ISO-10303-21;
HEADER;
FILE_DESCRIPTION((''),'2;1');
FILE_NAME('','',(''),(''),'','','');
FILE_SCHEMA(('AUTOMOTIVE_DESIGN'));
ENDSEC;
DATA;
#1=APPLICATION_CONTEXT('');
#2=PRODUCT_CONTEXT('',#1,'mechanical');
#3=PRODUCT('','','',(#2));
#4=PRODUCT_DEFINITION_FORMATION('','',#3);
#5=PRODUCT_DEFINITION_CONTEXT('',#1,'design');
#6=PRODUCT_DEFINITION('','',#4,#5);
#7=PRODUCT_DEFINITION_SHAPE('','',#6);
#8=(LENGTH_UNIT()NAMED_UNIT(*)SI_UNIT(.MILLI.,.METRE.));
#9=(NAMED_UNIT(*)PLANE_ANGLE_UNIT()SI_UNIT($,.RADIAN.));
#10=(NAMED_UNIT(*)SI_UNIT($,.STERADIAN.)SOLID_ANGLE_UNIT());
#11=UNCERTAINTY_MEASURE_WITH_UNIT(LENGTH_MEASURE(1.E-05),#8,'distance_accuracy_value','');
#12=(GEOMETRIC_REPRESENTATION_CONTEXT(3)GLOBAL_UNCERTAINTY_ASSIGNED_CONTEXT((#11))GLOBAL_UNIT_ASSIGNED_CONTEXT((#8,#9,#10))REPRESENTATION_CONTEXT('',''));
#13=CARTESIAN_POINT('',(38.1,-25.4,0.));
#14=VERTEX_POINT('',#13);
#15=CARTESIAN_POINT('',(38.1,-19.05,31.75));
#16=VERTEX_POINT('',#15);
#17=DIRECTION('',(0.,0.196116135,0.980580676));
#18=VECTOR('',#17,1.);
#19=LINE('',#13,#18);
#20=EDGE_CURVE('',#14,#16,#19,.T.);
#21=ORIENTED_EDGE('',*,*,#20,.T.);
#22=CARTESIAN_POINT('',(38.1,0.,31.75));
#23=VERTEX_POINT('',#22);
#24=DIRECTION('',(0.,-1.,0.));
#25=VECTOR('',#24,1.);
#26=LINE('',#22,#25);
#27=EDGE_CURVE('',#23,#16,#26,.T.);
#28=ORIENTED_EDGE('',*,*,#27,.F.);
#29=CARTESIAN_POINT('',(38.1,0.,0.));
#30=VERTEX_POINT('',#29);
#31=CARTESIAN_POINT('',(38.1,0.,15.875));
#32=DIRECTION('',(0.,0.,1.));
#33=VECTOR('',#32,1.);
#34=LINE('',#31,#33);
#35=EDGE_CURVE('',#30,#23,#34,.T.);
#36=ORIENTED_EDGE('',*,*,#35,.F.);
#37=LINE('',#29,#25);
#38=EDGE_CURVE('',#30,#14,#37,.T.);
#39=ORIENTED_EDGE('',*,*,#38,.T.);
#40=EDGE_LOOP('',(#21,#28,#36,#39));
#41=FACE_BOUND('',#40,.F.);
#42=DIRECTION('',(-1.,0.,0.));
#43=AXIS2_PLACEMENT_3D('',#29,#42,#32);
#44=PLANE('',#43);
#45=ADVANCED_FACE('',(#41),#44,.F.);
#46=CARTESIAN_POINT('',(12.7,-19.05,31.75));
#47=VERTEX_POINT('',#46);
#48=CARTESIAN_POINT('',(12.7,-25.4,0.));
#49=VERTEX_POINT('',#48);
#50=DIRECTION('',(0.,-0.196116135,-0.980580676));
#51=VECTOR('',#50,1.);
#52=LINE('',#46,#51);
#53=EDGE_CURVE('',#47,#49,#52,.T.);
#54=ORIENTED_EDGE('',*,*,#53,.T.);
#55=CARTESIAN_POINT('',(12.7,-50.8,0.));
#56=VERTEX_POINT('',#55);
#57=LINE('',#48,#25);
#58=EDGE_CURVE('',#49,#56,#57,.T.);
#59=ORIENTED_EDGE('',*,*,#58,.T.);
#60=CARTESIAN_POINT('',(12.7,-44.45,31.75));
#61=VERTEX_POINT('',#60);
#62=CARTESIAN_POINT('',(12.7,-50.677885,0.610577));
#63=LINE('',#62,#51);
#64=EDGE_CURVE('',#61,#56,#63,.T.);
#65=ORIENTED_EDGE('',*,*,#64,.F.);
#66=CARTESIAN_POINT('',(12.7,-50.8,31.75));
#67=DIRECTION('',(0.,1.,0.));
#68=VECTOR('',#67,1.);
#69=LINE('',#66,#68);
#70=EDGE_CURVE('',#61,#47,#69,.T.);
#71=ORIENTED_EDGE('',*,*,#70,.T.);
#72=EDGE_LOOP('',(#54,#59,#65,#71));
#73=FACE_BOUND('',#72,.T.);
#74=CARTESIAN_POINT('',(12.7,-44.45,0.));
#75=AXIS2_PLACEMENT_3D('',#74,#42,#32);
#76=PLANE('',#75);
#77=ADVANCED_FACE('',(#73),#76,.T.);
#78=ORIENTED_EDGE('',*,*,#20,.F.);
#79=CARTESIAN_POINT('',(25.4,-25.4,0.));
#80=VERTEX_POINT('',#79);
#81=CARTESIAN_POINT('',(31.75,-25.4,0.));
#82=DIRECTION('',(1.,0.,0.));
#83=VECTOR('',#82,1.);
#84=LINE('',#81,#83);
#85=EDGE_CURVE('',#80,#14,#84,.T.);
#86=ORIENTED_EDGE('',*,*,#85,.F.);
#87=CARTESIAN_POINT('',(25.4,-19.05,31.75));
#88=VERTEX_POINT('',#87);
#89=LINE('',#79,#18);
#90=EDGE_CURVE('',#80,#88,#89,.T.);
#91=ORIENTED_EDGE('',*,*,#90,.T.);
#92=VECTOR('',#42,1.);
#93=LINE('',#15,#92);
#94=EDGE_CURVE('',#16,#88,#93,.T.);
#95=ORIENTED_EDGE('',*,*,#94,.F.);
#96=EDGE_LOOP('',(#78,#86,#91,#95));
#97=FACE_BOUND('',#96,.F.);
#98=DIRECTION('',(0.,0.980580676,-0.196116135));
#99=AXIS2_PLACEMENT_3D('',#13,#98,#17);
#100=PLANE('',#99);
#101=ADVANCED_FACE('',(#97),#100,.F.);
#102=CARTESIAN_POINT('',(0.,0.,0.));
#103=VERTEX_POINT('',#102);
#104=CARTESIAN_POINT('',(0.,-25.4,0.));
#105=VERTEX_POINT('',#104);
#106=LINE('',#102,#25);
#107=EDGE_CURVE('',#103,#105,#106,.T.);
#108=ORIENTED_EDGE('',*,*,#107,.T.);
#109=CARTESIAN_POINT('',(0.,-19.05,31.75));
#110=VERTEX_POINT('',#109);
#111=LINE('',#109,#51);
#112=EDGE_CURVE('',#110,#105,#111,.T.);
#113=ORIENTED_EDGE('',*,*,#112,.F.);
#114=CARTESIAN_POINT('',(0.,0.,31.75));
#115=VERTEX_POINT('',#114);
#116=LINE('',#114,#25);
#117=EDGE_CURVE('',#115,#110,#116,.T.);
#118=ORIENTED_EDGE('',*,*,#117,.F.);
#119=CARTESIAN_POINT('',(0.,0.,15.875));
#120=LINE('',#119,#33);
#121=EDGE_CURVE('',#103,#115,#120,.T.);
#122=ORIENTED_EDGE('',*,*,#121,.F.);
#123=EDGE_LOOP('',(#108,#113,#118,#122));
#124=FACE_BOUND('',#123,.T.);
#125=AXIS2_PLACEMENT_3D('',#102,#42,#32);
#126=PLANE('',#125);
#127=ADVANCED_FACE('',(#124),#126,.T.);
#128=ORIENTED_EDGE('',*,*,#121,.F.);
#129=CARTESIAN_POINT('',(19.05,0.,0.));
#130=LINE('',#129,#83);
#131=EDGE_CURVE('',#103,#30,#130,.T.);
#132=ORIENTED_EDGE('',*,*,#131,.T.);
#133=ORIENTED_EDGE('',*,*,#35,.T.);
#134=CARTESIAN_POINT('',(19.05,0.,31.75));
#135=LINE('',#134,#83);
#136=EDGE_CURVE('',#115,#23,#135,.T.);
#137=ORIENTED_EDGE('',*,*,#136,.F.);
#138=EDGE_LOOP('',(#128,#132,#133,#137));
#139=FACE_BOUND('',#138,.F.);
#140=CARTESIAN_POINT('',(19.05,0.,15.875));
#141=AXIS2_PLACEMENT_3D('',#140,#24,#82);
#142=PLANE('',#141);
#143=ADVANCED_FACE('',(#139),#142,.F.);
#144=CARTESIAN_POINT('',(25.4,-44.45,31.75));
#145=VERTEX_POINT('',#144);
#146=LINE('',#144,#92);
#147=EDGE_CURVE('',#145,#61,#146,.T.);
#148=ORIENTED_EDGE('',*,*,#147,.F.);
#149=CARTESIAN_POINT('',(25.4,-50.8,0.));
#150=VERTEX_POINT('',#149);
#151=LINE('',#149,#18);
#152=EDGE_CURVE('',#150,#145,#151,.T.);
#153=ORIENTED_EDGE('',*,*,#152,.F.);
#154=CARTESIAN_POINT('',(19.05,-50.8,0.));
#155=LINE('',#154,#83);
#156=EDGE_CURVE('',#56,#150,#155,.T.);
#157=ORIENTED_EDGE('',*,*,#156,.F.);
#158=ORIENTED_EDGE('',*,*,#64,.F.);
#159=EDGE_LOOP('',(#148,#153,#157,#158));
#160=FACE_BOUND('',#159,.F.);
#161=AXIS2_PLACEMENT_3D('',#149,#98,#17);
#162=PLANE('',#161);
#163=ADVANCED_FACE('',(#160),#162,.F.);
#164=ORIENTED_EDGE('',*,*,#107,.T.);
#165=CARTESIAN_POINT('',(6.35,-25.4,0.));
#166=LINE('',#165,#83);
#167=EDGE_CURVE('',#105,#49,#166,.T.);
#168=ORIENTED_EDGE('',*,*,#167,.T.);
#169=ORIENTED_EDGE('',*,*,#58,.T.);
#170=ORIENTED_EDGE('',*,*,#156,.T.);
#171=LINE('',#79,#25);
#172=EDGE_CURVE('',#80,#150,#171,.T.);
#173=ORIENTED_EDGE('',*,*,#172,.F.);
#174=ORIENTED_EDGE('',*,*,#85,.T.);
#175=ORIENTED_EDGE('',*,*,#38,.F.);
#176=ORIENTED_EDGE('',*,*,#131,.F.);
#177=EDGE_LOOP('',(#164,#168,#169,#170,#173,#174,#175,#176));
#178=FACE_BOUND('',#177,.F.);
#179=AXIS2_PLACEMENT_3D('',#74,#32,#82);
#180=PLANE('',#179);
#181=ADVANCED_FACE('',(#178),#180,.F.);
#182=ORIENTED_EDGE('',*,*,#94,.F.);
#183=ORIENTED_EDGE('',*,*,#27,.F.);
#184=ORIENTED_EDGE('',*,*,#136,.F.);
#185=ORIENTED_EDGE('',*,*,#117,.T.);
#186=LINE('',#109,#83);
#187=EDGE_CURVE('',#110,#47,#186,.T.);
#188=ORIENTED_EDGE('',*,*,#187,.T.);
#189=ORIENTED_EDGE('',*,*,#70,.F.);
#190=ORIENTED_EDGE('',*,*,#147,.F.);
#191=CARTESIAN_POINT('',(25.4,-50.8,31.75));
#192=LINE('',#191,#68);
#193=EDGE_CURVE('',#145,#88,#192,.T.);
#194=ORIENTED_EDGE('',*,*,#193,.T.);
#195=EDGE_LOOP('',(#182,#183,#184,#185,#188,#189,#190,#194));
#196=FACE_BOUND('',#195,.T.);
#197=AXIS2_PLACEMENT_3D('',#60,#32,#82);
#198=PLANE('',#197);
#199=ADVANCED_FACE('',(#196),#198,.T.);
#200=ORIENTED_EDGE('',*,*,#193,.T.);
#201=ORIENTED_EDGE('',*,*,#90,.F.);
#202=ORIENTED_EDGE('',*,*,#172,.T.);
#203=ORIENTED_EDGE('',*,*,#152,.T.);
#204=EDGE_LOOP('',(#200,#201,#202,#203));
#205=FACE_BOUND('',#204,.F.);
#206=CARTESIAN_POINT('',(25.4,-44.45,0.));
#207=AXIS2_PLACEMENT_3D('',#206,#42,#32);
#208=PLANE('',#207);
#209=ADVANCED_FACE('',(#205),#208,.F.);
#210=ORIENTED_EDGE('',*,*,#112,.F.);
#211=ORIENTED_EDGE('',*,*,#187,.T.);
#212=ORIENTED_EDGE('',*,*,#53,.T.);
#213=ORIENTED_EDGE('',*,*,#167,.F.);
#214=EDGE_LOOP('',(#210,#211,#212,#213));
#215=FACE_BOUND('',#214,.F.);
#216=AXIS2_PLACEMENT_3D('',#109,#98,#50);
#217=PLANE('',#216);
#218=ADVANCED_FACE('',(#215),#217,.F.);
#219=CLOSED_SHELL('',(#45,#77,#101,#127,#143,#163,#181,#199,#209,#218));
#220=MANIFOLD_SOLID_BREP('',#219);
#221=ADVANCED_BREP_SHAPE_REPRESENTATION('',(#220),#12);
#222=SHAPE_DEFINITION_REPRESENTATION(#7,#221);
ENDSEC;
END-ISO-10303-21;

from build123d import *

# Parameters (mm, degrees)
F0_W      = 38.1
F0_H      = 31.75
F1_DEPTH  = 44.45
F2_W      = 12.7
F2_H      = 31.75
F3_DEPTH  = 19.05
F5_DEPTH  = 12.7
F7_DEPTH  = 12.7
F8_DEPTH  = 6.35
F10_DEPTH = 25.4


# Not quite as in the source:
# - a feature names something its author has since deleted; it is built from what else it names


with BuildPart() as f1:
    # F0 (on Front) → F1 (new body)
    with BuildSketch(Plane.XZ):
        with Locations((19.05, 15.875)):
            Rectangle(F0_W, F0_H)
    extrude(amount=F1_DEPTH)

    # F2 (on face) → F3 (cut)
    with BuildSketch(Plane.XZ.offset(44.45)):
        with Locations((31.75, 15.875)):
            Rectangle(F2_W, F2_H)
        with Locations((6.35, 15.875)):
            Rectangle(F2_W, F2_H)
    extrude(amount=-F3_DEPTH, mode=Mode.SUBTRACT)

    # F4 (on face) → F5 (cut)
    with BuildSketch(Plane.YZ.offset(38.1)):
        Polygon((-25.4, 0), (-19.05, 31.75), (-25.4, 31.75), align=None)
    extrude(amount=-F5_DEPTH, mode=Mode.SUBTRACT)

    # F6 (on face) → F7 (cut)
    with BuildSketch(Plane(origin=(0, 0, 0), x_dir=(0, -1, 0), z_dir=(-1, 0, 0))):
        Polygon((25.4, 0), (25.4, 31.75), (19.05, 31.75), align=None)
    extrude(amount=-F7_DEPTH, mode=Mode.SUBTRACT)

    # F8 (add): a face of the model
    f8_faces = [f1.faces().sort_by_distance(p)[0] for p in [
        (19.05, -44.45, 15.875),
    ]]
    extrude(f8_faces, amount=F8_DEPTH)

    # F9 (on face) → F10 (cut)
    with BuildSketch(Plane.YZ.offset(25.4)):
        Polygon((-50.8, 0), (-44.45, 31.75), (-50.8, 31.75), align=None)
    extrude(amount=-F10_DEPTH, mode=Mode.SUBTRACT)


solid = f1.part
